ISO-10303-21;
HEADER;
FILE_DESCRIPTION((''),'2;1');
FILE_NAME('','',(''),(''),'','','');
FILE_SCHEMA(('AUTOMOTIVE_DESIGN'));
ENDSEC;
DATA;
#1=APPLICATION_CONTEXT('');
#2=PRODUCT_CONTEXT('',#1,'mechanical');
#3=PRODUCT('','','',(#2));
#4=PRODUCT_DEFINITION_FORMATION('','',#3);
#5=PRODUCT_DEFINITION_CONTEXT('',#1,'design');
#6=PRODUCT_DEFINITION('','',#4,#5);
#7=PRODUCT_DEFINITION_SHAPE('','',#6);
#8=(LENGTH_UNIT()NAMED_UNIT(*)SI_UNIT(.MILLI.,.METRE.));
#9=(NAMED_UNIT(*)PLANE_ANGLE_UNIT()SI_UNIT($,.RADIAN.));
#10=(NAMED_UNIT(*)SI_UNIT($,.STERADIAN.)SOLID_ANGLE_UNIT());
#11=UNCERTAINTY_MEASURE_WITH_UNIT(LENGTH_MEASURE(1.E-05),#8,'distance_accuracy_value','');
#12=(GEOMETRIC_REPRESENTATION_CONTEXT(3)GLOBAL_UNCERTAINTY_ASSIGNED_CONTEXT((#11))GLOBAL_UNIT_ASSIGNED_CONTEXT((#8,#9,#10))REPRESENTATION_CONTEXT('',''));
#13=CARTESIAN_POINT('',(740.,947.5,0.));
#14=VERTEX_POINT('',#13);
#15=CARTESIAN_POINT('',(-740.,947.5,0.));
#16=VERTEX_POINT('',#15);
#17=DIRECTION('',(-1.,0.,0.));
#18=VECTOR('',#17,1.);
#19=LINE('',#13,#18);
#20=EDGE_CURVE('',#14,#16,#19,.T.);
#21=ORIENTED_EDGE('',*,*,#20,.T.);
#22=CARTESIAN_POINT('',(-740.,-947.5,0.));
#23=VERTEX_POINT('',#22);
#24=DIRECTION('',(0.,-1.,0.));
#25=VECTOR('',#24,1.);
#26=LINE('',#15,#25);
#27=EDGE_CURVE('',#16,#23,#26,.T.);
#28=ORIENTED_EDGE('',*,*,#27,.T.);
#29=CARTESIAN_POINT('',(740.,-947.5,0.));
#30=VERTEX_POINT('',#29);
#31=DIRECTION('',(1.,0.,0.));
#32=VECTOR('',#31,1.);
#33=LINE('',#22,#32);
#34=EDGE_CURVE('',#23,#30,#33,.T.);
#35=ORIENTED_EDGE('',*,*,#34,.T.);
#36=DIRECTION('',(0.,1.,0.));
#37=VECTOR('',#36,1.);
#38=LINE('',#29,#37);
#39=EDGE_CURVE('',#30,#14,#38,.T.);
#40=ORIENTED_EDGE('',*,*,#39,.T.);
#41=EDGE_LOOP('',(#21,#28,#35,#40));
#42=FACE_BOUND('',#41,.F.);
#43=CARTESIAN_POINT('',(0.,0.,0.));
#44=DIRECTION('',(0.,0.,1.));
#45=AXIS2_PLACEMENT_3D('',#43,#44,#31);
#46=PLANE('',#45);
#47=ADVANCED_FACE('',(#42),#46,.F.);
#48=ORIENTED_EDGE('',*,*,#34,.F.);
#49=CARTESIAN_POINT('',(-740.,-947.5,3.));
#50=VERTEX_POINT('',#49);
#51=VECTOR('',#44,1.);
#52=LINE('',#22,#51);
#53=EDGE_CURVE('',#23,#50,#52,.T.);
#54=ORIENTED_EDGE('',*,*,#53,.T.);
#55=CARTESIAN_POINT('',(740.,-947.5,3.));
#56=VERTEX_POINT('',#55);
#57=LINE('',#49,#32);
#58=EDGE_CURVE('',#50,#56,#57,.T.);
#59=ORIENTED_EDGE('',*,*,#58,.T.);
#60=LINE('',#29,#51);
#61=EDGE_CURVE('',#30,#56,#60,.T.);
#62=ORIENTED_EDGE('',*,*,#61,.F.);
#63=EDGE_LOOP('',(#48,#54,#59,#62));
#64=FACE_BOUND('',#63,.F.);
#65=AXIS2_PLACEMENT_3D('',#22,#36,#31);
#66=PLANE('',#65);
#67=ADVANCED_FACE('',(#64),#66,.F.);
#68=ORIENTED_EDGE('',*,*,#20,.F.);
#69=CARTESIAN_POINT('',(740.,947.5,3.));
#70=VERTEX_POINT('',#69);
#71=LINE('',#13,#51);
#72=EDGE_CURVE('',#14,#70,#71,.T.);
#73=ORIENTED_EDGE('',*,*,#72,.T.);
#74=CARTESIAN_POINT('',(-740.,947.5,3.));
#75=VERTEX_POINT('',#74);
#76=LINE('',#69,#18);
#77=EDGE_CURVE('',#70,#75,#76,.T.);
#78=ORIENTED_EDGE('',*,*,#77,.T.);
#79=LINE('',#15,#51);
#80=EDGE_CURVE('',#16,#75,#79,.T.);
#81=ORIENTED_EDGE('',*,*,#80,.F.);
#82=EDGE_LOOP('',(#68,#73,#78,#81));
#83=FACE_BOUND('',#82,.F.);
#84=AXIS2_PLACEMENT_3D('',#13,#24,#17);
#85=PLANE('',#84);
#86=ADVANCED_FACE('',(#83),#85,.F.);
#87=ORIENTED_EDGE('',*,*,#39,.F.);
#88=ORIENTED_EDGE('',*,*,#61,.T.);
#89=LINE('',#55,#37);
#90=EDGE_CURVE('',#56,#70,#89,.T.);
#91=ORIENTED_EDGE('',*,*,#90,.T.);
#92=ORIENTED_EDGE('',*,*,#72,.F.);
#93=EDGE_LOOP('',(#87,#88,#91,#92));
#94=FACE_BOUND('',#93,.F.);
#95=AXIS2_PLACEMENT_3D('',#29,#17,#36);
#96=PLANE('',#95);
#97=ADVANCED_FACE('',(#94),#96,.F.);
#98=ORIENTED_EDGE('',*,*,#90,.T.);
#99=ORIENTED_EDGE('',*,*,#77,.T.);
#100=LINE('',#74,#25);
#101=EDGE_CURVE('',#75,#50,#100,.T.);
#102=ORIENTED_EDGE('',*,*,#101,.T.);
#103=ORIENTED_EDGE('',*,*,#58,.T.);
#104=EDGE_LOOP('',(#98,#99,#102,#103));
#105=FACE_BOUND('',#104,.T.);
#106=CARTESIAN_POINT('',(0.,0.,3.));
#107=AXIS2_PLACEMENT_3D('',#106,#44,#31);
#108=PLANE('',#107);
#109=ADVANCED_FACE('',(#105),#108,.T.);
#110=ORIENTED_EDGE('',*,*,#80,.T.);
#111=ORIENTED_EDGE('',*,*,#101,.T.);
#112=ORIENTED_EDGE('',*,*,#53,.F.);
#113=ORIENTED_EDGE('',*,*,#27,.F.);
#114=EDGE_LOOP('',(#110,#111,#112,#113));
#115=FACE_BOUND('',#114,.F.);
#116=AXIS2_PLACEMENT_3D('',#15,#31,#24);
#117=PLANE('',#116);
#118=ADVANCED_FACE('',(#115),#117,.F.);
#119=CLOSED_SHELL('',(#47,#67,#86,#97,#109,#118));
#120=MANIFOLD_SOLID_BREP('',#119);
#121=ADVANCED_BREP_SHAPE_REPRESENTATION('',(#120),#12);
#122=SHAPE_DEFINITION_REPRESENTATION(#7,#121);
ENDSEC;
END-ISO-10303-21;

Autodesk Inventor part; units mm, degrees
ref_plane "YZ Plane" through (0, 0, 0) normal (1, 0, 0) x (0, 1, 0)
ref_plane "XZ Plane" through (0, 0, 0) normal (0, 1, 0) x (-1, 0, 0)
ref_plane "XY Plane" through (0, 0, 0) normal (0, 0, 1) x (1, 0, 0)
sketch "Sketch6" plane through (0, 0, 0) normal (0, 0, 1) x (1, 0, 0)
  line L0 (740, 947.5) -> (-740, 947.5)
  line L1 (-740, 947.5) -> (-740, -947.5)
  line L2 (-740, -947.5) -> (740, -947.5)
  line L3 (740, -947.5) -> (740, 947.5)
  line L4 (740, 947.5) -> (-740, -947.5) construction
  line L5 (-740, 947.5) -> (740, -947.5) construction
  point P0 (0, 0)
  dimension "d40" = 1480
  dimension "d41" = 1895
extrude "Plate5" add sketch "Sketch6" along normal blind 3
sketch "Sketch7" plane through (0, 0, 0) normal (0, 0, -1) x (-1, 0, 0)
  line L0 (-715, 922.5) -> (-515, 922.5) construction
  line L1 (-515, 922.5) -> (-515, 907.5) construction
  line L2 (-515, 907.5) -> (-715, 907.5) construction
  line L3 (-715, 907.5) -> (-715, 922.5) construction
  line L4 (-740, 947.5) -> (740, 947.5) projected
  line L5 (-740, -947.5) -> (-740, 947.5) projected
  point P0 (0, 0)
  dimension "d43" = 200
  dimension "d44" = 15
  dimension "d45" = 25
  dimension "d46" = 25
mark "Mark1"
equation "\"d42\" = Thickness"
equation "\"BendReliefWidth\" = Thickness"
equation "\"BendReliefDepth\" = 0.5 * Thickness"
equation "\"CornerReliefSize\" = 4 * Thickness"
equation "\"MinimumRemnant\" = 2 * Thickness"
equation "\"TransitionRadius\" = BendRadius"
equation "\"JacobiRadiusSize\" = BendRadius"
equation "\"GapSize\" = Thickness"
equation "\"Thickness\" = 3"
equation "\"BendRadius\" = 5"
properties part number "BSH 045 back" material "09g2s"
